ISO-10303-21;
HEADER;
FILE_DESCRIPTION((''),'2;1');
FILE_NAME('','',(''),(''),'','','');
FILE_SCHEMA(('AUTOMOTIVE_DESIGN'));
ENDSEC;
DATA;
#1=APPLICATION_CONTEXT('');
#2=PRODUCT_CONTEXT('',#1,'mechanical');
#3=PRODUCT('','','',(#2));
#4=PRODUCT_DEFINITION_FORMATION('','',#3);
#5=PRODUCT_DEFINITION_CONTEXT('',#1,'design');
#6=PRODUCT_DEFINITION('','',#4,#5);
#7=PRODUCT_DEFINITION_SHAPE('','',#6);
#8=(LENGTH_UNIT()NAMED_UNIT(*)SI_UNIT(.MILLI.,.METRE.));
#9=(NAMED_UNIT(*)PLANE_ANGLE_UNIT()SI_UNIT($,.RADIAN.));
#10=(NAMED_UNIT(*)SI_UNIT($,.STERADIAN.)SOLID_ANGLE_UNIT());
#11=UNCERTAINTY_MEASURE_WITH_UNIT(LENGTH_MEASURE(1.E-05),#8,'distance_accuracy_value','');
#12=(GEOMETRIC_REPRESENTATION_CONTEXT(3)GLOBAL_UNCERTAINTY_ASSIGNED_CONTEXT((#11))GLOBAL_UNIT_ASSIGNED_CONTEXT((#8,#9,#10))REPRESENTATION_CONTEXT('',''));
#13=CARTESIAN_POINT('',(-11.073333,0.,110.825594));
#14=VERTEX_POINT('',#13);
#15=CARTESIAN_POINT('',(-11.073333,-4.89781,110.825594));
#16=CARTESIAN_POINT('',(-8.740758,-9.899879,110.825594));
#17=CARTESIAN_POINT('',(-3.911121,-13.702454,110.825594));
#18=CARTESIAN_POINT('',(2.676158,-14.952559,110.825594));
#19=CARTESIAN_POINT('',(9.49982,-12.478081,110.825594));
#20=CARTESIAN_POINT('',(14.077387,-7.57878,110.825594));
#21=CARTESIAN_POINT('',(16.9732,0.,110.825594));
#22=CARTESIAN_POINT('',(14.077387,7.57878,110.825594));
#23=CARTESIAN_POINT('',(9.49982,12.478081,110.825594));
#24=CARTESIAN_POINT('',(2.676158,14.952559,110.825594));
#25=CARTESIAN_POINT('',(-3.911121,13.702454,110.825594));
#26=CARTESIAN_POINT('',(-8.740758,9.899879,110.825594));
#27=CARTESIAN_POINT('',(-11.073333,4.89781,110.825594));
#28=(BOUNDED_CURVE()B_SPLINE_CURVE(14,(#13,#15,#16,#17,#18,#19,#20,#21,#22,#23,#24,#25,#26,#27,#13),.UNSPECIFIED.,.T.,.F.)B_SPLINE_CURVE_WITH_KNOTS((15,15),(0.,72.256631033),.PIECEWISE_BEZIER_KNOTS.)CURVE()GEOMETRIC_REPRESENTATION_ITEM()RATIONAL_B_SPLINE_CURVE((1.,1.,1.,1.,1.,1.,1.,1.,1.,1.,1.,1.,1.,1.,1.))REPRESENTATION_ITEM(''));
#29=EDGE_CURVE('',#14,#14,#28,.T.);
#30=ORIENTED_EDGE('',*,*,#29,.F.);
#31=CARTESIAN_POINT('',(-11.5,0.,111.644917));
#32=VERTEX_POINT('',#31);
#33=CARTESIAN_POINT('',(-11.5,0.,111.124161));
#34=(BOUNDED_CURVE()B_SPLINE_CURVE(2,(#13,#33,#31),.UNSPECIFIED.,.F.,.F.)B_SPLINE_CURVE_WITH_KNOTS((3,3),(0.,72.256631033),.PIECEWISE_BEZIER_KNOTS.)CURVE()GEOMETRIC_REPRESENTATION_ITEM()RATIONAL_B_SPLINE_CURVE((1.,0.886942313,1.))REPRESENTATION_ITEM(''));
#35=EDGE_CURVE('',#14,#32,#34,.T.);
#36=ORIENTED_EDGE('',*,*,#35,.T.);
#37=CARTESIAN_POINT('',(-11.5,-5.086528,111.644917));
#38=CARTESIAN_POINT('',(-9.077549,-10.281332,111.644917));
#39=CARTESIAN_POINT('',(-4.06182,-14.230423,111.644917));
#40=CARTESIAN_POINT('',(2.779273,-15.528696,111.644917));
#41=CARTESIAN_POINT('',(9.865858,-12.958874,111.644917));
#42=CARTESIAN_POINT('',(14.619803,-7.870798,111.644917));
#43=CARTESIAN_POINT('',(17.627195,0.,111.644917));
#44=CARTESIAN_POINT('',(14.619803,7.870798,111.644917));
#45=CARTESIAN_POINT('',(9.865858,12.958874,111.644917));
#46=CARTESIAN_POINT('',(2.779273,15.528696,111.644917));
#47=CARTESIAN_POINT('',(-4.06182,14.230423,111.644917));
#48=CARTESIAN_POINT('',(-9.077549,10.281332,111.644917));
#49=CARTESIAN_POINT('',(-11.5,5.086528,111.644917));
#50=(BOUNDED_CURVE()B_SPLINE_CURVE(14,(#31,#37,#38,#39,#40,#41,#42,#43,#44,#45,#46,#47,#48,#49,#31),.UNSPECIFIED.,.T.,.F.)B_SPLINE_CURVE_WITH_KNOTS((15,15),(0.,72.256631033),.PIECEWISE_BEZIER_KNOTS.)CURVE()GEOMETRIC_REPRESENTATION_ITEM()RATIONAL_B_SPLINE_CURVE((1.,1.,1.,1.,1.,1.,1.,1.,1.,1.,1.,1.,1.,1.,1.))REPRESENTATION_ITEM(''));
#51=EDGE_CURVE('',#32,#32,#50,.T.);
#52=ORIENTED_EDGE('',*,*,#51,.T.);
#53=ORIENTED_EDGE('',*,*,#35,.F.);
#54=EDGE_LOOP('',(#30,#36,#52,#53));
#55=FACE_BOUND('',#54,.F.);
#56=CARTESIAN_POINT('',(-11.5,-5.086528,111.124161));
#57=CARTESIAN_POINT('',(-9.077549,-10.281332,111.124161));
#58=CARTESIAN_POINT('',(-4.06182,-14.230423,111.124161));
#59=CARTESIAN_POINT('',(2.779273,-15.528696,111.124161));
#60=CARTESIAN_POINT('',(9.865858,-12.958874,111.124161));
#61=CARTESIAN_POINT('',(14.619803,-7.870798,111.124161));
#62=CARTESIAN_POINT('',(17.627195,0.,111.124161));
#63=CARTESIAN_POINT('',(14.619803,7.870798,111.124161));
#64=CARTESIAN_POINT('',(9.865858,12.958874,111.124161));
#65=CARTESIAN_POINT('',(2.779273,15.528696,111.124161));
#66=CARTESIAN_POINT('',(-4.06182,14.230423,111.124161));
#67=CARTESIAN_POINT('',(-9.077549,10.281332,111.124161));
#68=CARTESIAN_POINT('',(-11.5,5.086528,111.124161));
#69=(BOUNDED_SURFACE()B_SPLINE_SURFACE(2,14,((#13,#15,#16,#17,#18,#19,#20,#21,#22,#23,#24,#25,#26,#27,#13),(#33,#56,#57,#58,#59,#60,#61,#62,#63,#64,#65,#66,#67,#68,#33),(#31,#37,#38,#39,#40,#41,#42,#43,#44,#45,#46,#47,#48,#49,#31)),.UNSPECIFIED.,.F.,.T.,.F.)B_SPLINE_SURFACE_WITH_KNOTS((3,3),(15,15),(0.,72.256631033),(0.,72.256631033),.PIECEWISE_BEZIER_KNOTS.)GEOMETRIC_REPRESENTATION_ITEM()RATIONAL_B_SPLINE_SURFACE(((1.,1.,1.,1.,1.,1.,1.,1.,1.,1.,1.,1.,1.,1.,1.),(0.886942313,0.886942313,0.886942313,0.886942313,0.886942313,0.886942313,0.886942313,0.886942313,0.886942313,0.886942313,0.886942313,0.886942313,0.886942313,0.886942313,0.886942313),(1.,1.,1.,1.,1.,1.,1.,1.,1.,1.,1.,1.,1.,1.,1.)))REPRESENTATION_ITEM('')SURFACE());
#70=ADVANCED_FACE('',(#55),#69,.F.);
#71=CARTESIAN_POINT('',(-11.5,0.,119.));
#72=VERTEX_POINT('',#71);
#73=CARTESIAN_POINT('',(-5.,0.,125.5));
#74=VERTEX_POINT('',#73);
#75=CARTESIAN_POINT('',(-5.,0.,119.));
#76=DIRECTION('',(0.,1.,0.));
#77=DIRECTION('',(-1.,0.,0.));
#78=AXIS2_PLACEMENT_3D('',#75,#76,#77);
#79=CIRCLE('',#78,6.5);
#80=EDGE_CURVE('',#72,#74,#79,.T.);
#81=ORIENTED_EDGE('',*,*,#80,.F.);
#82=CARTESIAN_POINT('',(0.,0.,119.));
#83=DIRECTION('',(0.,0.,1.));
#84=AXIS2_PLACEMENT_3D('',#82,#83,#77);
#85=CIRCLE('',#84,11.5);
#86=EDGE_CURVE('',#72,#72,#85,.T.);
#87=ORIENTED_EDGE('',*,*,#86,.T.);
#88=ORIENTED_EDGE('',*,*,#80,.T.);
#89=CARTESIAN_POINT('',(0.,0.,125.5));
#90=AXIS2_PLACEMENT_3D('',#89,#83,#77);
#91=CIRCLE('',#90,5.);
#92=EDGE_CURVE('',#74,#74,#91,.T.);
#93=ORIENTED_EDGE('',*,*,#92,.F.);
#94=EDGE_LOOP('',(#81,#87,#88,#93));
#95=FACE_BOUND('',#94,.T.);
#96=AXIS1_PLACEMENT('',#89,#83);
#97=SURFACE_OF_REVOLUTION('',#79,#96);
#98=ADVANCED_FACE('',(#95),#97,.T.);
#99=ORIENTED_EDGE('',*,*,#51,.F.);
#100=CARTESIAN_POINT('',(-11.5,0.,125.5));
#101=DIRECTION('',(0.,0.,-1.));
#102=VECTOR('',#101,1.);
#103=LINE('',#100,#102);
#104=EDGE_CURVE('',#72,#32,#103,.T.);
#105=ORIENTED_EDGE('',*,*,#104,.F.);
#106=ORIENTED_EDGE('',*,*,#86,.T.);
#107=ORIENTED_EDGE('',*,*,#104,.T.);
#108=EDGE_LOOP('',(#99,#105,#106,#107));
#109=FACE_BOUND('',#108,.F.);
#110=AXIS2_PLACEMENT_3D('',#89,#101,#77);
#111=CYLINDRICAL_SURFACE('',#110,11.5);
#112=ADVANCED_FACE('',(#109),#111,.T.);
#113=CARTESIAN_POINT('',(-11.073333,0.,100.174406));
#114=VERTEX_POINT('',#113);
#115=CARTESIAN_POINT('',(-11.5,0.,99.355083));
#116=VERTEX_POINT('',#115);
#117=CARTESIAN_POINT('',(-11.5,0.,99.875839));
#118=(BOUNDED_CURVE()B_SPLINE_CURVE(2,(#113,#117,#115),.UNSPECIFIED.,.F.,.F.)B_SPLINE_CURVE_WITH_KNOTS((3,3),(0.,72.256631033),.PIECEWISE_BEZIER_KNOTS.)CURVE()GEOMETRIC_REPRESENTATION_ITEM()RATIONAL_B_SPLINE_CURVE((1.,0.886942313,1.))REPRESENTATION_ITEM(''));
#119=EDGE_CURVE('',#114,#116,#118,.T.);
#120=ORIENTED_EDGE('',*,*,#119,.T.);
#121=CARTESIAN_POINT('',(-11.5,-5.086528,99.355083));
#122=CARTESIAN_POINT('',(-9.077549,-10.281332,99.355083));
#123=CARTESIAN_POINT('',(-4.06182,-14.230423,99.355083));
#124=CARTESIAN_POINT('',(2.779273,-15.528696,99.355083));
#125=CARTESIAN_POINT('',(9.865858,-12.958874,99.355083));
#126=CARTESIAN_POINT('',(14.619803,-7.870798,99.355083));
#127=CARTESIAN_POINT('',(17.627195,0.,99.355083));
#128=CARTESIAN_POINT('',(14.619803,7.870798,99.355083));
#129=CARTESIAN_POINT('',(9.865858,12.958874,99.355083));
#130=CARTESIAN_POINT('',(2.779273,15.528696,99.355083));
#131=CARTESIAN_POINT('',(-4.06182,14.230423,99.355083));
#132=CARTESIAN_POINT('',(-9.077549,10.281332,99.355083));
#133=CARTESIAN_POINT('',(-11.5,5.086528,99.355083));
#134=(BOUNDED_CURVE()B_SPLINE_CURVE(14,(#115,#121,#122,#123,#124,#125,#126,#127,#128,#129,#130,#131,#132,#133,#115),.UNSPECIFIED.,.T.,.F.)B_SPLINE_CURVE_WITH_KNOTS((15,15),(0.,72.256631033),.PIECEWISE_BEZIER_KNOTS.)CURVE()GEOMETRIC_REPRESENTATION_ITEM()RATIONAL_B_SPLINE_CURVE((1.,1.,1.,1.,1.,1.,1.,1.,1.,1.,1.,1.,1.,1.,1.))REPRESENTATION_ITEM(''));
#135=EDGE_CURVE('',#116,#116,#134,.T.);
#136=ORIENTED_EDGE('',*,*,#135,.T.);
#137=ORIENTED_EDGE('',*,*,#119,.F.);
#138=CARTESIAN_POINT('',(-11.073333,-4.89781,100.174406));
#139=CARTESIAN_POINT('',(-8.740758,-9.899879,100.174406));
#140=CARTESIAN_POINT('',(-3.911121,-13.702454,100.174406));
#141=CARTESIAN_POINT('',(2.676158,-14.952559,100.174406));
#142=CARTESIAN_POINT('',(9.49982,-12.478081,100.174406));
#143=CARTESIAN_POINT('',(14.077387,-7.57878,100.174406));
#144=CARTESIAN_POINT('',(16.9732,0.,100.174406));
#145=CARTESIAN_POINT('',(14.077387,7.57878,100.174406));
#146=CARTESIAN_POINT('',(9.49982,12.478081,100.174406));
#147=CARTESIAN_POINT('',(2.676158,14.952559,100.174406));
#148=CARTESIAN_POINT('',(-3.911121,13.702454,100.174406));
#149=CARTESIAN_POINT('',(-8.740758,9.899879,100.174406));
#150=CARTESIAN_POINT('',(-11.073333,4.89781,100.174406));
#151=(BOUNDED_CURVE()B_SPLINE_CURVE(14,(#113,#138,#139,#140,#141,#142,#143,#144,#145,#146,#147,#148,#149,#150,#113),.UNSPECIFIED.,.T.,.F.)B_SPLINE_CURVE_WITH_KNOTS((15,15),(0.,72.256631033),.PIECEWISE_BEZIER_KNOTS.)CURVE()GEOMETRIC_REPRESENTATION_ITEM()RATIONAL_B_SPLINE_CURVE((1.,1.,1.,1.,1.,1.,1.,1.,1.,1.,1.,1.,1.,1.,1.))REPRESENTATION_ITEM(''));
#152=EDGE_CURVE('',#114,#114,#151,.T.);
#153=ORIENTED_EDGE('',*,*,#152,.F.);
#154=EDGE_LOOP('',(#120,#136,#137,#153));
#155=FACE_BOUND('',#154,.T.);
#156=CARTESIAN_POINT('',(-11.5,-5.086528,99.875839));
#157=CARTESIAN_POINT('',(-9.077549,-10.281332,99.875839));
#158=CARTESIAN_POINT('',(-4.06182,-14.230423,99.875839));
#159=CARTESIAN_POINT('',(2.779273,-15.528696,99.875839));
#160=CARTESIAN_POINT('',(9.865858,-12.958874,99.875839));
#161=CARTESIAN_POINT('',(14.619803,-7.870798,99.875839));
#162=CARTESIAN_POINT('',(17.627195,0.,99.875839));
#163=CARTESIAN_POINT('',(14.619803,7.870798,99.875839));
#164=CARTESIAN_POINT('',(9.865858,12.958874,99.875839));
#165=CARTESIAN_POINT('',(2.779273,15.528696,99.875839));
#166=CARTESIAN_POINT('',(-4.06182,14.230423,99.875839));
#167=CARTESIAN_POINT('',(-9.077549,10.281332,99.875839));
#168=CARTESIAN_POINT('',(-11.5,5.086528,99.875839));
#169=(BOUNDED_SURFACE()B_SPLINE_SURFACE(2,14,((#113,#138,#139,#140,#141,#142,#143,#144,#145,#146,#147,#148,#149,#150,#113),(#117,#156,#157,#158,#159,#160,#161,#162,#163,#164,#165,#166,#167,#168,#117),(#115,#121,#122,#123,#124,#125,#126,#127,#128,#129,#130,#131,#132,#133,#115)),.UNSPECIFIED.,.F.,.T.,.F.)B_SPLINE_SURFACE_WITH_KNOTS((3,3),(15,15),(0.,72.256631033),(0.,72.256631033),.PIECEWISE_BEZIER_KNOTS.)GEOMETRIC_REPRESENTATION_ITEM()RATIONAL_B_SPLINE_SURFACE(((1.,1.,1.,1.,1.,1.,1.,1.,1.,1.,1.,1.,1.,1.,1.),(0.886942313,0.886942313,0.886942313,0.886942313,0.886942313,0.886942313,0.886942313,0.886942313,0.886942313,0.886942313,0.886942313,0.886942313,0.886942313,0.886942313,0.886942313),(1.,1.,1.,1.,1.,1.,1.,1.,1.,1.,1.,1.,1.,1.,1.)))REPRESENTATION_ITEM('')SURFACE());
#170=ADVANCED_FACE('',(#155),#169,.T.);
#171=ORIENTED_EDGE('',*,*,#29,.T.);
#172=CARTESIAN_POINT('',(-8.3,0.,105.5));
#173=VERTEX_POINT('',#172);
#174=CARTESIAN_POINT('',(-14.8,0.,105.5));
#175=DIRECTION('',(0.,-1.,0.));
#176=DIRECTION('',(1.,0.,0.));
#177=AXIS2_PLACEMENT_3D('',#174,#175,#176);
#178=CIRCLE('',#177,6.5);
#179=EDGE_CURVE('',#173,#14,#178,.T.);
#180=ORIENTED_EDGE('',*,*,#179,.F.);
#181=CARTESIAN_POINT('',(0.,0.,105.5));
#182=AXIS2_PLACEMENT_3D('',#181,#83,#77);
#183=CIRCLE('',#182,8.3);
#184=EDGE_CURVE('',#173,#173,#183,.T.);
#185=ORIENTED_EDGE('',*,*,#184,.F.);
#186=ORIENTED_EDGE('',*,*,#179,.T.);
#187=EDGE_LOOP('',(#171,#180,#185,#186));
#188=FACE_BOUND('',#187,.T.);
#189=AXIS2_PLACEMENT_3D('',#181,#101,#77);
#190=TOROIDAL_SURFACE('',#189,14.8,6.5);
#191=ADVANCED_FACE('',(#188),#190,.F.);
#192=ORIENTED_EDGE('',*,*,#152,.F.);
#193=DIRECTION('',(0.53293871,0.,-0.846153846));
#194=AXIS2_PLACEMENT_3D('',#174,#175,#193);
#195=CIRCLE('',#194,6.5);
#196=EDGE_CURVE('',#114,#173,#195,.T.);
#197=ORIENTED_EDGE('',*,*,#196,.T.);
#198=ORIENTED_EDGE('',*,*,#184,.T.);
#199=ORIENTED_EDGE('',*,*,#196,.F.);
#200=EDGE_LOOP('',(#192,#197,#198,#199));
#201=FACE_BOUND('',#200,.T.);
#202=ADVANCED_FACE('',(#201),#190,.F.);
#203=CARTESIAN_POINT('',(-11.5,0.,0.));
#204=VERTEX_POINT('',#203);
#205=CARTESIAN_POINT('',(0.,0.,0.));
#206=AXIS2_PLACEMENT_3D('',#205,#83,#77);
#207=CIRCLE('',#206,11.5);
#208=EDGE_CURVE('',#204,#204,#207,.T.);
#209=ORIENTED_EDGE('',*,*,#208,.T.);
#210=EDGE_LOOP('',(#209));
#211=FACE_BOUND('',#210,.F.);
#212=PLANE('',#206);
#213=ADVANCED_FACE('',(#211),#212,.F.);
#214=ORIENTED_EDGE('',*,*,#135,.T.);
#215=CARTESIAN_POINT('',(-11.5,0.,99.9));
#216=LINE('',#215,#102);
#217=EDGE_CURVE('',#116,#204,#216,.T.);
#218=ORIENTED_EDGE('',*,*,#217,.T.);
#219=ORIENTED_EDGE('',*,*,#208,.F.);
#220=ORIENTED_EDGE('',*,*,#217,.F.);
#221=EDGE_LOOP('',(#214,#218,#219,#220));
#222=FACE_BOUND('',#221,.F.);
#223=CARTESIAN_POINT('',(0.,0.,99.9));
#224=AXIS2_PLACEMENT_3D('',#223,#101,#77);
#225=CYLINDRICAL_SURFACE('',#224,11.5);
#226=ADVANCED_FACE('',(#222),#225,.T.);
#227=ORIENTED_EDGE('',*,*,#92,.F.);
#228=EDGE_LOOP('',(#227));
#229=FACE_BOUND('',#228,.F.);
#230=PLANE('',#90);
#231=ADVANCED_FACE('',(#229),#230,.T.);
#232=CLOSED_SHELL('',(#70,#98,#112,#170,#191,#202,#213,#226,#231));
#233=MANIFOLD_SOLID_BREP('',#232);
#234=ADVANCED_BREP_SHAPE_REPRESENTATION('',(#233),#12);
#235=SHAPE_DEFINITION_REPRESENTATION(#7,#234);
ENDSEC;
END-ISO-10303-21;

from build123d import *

# Parameters (mm, degrees)
F3_R = 1


# Not quite as in the source:
# - a fillet or chamfer that OpenCascade refuses, or shapes differently, is made with other operations: its cross-section is extruded or revolved along the edge and cut away or added


with BuildPart() as f1:
    # F0 (on Front) → F1 (revolve)
    with BuildSketch(Plane.XZ):
        with BuildLine():
            Line((-11.5, 0), (0, 0))
            Line((0, 0), (0, 125.5))
            Line((0, 125.5), (-11.5, 125.5))
            Line((-11.5, 125.5), (-11.5, 111.1))
            ThreePointArc((-11.5, 111.1), (-11.4175796144, 111.0506064835), (-11.3358983849, 111))
            Line((-11.3358983849, 111), (-8.3, 111))
            Line((-8.3, 111), (-8.3, 105.5))
            Line((-8.3, 105.5), (-8.3, 100))
            Line((-8.3, 100), (-11.3358983849, 100))
            ThreePointArc((-11.3358983849, 100), (-11.4175796144, 99.9493935165), (-11.5, 99.9))
            Line((-11.5, 99.9), (-11.5, 0))
        make_face()
    revolve(axis=Axis((0, 0, 62.75), (0, 0, 1)))

    # F2: fillet of radius 6.5 on 3 edges, made by hand

    # F2_s1 → F2_t2 (revolve, cut)
    with BuildSketch(Plane.XZ):
        with BuildLine():
            ThreePointArc((-11.5, 119), (-9.5961940777, 123.5961940777), (-5, 125.5))
            Line((-5, 125.5), (-11.5, 125.5))
            Line((-11.5, 125.5), (-11.5, 119))
        make_face()
    revolve(axis=Axis((0, 0, 125.5), (0, 0, 1)), mode=Mode.SUBTRACT)

    # F2_s3 → F2_t4 (revolve)
    with BuildSketch(Plane.XZ):
        with BuildLine():
            ThreePointArc((-8.3, 105.5), (-9.1093646884, 108.6411255548), (-11.3358983849, 111))
            Line((-11.3358983849, 111), (-8.3, 111))
            Line((-8.3, 111), (-8.3, 105.5))
        make_face()
    revolve(axis=Axis((0, 0, 111), (0, 0, 1)))

    # F2_s5 → F2_t6 (revolve)
    with BuildSketch(Plane.XZ):
        with BuildLine():
            ThreePointArc((-11.3358983849, 100), (-9.1093646884, 102.3588744452), (-8.3, 105.5))
            Line((-8.3, 105.5), (-8.3, 100))
            Line((-8.3, 100), (-11.3358983849, 100))
        make_face()
    revolve(axis=Axis((0, 0, 100), (0, 0, 1)))

    # F3
    f3_edges = [f1.edges().sort_by_distance(p)[0] for p in [
        (11.5, 0, 111.1),
        (11.5, 0, 99.9),
    ]]
    fillet(f3_edges, radius=F3_R)


solid = f1.part
